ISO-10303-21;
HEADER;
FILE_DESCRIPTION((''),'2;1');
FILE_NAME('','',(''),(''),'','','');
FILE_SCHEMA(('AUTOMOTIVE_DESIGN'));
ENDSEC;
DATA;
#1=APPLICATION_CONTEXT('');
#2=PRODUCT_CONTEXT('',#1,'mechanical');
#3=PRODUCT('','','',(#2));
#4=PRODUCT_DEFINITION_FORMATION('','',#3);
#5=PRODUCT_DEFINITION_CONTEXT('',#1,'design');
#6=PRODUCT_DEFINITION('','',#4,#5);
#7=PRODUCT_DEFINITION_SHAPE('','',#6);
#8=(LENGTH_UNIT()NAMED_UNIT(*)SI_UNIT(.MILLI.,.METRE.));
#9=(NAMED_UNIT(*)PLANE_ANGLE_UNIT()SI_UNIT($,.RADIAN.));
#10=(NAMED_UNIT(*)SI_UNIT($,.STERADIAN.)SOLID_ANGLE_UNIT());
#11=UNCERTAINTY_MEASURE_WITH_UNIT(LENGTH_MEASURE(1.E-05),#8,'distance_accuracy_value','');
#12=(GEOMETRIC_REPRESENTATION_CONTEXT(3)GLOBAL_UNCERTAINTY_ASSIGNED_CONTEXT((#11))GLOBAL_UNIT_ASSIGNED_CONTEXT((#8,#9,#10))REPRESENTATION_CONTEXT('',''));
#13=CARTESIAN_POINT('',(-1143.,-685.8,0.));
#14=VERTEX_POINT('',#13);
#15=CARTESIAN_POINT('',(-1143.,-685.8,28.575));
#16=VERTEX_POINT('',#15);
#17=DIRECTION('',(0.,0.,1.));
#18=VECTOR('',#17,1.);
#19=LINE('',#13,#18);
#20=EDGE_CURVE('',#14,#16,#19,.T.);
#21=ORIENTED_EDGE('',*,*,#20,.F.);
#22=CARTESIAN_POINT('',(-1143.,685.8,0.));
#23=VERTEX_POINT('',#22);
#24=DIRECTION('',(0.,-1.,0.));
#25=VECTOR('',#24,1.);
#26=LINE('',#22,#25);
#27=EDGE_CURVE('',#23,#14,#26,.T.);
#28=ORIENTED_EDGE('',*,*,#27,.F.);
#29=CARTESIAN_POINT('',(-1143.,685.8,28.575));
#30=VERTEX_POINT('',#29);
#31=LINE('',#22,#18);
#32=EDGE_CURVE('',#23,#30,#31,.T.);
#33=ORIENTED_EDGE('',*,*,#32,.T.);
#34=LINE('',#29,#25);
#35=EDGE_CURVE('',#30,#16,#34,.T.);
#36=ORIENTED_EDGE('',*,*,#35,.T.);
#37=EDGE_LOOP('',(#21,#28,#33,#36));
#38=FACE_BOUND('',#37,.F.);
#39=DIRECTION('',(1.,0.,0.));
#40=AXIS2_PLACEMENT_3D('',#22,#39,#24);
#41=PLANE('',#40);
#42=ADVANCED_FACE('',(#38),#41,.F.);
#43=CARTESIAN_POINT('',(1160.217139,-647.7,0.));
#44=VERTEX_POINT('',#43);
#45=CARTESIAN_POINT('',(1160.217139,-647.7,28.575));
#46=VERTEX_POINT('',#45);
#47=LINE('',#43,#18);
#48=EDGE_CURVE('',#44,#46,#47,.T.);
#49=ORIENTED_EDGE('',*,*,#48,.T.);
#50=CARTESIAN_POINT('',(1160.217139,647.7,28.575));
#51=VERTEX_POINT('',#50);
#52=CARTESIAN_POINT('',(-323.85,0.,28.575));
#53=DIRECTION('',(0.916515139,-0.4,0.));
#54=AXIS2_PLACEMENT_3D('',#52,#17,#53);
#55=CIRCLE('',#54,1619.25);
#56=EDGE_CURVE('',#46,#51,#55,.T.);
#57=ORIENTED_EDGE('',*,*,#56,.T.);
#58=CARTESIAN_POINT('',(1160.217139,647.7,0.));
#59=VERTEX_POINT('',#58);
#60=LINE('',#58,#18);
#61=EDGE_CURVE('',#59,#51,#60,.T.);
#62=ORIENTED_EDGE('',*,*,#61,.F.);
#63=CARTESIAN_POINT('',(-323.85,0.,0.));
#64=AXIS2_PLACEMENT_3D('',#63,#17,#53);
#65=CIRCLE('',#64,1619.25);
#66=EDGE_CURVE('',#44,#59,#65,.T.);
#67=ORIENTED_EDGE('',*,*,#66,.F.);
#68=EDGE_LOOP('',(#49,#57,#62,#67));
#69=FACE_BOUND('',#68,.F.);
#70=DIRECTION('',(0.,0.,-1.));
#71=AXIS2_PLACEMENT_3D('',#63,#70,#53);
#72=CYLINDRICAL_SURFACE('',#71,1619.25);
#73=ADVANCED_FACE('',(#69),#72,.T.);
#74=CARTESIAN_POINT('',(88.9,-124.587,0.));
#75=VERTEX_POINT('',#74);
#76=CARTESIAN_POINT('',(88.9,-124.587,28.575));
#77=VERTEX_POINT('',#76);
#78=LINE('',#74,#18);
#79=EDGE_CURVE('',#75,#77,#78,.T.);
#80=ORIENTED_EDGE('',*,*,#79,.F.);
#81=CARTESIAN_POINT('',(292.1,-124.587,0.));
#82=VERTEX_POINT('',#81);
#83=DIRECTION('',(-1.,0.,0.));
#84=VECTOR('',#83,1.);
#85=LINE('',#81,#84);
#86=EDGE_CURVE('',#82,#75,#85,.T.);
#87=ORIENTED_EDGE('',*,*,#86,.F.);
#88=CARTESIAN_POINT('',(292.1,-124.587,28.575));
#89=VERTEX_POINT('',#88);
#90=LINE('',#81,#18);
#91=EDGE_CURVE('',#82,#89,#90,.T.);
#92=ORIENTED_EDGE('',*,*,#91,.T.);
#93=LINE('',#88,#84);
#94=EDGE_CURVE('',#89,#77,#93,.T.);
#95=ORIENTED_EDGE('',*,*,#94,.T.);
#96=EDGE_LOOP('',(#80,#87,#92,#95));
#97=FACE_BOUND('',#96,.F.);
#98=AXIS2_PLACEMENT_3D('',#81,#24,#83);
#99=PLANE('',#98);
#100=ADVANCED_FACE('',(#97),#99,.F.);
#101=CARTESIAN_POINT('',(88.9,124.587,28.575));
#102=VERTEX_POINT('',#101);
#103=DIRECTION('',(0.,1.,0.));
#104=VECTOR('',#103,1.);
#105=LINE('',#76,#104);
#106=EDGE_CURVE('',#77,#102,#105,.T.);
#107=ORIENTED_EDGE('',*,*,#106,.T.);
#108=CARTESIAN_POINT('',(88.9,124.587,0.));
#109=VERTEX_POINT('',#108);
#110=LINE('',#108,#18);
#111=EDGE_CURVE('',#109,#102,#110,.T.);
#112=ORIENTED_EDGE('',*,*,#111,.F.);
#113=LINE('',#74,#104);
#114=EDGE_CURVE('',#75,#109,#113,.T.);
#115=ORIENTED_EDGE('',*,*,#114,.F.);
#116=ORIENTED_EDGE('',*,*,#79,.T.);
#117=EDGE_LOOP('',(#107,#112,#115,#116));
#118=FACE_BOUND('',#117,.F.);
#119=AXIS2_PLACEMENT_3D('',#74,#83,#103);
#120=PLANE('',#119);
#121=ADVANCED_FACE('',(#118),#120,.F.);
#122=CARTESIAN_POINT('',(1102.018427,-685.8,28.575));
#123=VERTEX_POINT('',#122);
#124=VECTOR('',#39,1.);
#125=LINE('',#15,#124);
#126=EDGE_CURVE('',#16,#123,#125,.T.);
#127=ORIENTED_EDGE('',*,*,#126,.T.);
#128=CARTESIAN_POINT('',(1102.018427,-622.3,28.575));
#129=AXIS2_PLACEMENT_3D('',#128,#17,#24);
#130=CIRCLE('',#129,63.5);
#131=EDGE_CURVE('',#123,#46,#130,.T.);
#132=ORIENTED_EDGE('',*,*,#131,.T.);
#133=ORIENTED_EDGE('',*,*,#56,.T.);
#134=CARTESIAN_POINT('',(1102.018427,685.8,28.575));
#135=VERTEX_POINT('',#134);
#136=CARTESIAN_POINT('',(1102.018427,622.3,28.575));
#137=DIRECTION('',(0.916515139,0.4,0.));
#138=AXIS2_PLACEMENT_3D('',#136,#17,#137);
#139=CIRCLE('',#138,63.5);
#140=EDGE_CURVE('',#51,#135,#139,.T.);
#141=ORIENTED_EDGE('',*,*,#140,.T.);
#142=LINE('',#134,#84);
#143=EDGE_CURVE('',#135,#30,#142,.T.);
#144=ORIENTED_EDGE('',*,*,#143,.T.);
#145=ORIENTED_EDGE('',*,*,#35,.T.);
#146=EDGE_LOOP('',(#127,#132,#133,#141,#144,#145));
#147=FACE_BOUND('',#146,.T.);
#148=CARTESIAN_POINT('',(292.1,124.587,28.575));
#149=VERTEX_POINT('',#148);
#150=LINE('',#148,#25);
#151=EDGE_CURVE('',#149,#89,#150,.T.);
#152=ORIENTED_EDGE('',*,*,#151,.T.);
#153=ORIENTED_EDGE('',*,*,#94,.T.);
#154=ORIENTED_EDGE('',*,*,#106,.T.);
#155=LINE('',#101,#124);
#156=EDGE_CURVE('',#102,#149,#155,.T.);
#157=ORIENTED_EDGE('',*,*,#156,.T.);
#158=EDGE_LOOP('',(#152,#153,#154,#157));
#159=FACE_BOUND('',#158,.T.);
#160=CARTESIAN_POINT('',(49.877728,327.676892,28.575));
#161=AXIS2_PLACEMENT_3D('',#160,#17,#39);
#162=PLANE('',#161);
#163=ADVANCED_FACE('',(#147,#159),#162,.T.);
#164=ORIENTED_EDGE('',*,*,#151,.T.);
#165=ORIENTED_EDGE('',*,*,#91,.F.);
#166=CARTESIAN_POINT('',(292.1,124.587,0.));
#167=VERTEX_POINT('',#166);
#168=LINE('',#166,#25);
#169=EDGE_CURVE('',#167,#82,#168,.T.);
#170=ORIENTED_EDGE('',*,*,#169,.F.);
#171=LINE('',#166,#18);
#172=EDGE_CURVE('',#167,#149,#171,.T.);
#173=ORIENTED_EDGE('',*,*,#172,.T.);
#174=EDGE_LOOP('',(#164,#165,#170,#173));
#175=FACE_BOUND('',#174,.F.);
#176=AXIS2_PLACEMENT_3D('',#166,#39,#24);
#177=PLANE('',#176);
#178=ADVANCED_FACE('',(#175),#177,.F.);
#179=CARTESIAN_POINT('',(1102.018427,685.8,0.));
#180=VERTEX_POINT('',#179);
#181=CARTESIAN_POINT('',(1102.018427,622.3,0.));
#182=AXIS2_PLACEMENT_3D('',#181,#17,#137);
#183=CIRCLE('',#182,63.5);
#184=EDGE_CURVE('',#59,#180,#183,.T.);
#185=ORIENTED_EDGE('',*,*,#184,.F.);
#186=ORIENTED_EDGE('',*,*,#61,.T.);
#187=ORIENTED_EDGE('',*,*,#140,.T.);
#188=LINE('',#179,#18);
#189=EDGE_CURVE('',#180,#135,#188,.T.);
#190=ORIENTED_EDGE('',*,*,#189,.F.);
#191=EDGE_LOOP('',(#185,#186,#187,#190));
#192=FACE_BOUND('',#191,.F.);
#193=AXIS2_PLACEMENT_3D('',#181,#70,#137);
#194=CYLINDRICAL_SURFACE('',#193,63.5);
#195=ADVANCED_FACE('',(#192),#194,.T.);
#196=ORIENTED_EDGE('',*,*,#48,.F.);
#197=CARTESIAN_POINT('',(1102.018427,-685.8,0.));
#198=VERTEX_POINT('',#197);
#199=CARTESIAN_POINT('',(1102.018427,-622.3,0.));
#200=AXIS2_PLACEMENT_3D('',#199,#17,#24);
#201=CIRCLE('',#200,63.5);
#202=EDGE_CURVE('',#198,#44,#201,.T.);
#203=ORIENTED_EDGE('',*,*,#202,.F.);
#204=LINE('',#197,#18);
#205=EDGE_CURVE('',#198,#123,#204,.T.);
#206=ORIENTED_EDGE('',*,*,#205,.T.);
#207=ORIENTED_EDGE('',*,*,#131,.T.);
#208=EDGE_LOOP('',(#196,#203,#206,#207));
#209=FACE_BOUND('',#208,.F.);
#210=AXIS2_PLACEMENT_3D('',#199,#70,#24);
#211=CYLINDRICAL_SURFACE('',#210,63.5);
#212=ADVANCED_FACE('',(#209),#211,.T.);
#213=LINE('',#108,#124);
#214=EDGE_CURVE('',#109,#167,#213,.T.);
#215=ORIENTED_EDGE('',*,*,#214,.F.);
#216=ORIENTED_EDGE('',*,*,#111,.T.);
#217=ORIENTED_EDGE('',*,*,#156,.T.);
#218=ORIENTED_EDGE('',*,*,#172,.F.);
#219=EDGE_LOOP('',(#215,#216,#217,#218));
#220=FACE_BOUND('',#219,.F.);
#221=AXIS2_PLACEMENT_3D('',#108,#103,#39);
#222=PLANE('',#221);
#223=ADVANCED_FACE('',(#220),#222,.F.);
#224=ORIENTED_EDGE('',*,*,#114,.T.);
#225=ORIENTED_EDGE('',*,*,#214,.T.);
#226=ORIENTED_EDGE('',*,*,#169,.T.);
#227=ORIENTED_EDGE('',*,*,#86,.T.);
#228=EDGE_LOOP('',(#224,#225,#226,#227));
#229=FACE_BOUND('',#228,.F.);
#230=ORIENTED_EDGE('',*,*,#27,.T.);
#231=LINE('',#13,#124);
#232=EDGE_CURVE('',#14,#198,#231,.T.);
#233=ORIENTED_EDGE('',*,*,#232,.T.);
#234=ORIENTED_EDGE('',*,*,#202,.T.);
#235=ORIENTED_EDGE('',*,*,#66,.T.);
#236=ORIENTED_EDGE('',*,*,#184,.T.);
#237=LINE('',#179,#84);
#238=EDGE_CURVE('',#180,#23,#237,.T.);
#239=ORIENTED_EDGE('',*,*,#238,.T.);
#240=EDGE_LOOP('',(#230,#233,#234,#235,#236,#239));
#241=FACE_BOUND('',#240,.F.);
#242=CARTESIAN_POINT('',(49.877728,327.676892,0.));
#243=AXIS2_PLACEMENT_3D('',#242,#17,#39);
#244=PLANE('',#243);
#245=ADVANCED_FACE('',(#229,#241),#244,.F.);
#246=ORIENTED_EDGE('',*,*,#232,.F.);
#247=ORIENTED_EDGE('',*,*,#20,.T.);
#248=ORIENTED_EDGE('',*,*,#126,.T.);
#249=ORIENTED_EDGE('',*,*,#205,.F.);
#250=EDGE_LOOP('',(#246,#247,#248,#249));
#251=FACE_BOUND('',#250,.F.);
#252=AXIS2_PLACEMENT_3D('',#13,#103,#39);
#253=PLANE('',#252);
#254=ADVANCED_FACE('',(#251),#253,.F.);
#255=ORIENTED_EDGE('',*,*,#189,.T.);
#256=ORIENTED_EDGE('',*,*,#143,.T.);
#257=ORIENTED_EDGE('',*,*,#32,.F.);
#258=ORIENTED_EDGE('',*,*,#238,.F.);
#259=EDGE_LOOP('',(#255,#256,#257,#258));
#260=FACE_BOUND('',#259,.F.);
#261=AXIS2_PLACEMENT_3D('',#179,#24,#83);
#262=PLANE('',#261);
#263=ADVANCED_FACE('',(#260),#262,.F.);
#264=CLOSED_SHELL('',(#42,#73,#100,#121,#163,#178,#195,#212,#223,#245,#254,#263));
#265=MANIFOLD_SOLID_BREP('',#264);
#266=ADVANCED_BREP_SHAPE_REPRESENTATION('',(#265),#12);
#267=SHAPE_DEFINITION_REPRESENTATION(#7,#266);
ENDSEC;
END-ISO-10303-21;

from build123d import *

# Parameters (mm, degrees)
F1_DEPTH = 28.575


# Not quite as in the source:
# - a feature names something its author has since deleted; it is built from what else it names


with BuildPart() as f1:
    # F0 (on Top) → F1 (new body)
    with BuildSketch(Plane.XY):
        with BuildLine():
            Line((1102.0184274855, 685.8), (-1143, 685.8))
            Line((-1143, 685.8), (-1143, 0))
            Line((-1143, 0), (88.9, 0))
            Line((88.9, 0), (88.9, 124.587))
            Line((88.9, 124.587), (292.1, 124.587))
            Line((292.1, 124.587), (292.1, 0))
            Line((292.1, 0), (1143, 0))
            Line((1143, 0), (1295.4, 0))
            ThreePointArc((1295.4, 0), (1261.244047213, 330.8283905438), (1160.2171388114, 647.7))
            ThreePointArc((1160.2171388114, 647.7), (1136.7988098871, 675.4279116849), (1102.0184274855, 685.8))
        make_face()
        with BuildLine():
            Line((88.9, 0), (-1143, 0))
            Line((-1143, 0), (-1143, -685.8))
            Line((-1143, -685.8), (1102.0184274855, -685.8))
            ThreePointArc((1102.0184274855, -685.8), (1136.7988098871, -675.4279116849), (1160.2171388114, -647.7))
            ThreePointArc((1160.2171388114, -647.7), (1261.244047213, -330.8283905438), (1295.4, 0))
            Line((1295.4, 0), (1143, 0))
            Line((1143, 0), (292.1, 0))
            Line((292.1, 0), (292.1, -124.587))
            Line((292.1, -124.587), (88.9, -124.587))
            Line((88.9, -124.587), (88.9, 0))
        make_face()
    extrude(amount=F1_DEPTH)


solid = f1.part
